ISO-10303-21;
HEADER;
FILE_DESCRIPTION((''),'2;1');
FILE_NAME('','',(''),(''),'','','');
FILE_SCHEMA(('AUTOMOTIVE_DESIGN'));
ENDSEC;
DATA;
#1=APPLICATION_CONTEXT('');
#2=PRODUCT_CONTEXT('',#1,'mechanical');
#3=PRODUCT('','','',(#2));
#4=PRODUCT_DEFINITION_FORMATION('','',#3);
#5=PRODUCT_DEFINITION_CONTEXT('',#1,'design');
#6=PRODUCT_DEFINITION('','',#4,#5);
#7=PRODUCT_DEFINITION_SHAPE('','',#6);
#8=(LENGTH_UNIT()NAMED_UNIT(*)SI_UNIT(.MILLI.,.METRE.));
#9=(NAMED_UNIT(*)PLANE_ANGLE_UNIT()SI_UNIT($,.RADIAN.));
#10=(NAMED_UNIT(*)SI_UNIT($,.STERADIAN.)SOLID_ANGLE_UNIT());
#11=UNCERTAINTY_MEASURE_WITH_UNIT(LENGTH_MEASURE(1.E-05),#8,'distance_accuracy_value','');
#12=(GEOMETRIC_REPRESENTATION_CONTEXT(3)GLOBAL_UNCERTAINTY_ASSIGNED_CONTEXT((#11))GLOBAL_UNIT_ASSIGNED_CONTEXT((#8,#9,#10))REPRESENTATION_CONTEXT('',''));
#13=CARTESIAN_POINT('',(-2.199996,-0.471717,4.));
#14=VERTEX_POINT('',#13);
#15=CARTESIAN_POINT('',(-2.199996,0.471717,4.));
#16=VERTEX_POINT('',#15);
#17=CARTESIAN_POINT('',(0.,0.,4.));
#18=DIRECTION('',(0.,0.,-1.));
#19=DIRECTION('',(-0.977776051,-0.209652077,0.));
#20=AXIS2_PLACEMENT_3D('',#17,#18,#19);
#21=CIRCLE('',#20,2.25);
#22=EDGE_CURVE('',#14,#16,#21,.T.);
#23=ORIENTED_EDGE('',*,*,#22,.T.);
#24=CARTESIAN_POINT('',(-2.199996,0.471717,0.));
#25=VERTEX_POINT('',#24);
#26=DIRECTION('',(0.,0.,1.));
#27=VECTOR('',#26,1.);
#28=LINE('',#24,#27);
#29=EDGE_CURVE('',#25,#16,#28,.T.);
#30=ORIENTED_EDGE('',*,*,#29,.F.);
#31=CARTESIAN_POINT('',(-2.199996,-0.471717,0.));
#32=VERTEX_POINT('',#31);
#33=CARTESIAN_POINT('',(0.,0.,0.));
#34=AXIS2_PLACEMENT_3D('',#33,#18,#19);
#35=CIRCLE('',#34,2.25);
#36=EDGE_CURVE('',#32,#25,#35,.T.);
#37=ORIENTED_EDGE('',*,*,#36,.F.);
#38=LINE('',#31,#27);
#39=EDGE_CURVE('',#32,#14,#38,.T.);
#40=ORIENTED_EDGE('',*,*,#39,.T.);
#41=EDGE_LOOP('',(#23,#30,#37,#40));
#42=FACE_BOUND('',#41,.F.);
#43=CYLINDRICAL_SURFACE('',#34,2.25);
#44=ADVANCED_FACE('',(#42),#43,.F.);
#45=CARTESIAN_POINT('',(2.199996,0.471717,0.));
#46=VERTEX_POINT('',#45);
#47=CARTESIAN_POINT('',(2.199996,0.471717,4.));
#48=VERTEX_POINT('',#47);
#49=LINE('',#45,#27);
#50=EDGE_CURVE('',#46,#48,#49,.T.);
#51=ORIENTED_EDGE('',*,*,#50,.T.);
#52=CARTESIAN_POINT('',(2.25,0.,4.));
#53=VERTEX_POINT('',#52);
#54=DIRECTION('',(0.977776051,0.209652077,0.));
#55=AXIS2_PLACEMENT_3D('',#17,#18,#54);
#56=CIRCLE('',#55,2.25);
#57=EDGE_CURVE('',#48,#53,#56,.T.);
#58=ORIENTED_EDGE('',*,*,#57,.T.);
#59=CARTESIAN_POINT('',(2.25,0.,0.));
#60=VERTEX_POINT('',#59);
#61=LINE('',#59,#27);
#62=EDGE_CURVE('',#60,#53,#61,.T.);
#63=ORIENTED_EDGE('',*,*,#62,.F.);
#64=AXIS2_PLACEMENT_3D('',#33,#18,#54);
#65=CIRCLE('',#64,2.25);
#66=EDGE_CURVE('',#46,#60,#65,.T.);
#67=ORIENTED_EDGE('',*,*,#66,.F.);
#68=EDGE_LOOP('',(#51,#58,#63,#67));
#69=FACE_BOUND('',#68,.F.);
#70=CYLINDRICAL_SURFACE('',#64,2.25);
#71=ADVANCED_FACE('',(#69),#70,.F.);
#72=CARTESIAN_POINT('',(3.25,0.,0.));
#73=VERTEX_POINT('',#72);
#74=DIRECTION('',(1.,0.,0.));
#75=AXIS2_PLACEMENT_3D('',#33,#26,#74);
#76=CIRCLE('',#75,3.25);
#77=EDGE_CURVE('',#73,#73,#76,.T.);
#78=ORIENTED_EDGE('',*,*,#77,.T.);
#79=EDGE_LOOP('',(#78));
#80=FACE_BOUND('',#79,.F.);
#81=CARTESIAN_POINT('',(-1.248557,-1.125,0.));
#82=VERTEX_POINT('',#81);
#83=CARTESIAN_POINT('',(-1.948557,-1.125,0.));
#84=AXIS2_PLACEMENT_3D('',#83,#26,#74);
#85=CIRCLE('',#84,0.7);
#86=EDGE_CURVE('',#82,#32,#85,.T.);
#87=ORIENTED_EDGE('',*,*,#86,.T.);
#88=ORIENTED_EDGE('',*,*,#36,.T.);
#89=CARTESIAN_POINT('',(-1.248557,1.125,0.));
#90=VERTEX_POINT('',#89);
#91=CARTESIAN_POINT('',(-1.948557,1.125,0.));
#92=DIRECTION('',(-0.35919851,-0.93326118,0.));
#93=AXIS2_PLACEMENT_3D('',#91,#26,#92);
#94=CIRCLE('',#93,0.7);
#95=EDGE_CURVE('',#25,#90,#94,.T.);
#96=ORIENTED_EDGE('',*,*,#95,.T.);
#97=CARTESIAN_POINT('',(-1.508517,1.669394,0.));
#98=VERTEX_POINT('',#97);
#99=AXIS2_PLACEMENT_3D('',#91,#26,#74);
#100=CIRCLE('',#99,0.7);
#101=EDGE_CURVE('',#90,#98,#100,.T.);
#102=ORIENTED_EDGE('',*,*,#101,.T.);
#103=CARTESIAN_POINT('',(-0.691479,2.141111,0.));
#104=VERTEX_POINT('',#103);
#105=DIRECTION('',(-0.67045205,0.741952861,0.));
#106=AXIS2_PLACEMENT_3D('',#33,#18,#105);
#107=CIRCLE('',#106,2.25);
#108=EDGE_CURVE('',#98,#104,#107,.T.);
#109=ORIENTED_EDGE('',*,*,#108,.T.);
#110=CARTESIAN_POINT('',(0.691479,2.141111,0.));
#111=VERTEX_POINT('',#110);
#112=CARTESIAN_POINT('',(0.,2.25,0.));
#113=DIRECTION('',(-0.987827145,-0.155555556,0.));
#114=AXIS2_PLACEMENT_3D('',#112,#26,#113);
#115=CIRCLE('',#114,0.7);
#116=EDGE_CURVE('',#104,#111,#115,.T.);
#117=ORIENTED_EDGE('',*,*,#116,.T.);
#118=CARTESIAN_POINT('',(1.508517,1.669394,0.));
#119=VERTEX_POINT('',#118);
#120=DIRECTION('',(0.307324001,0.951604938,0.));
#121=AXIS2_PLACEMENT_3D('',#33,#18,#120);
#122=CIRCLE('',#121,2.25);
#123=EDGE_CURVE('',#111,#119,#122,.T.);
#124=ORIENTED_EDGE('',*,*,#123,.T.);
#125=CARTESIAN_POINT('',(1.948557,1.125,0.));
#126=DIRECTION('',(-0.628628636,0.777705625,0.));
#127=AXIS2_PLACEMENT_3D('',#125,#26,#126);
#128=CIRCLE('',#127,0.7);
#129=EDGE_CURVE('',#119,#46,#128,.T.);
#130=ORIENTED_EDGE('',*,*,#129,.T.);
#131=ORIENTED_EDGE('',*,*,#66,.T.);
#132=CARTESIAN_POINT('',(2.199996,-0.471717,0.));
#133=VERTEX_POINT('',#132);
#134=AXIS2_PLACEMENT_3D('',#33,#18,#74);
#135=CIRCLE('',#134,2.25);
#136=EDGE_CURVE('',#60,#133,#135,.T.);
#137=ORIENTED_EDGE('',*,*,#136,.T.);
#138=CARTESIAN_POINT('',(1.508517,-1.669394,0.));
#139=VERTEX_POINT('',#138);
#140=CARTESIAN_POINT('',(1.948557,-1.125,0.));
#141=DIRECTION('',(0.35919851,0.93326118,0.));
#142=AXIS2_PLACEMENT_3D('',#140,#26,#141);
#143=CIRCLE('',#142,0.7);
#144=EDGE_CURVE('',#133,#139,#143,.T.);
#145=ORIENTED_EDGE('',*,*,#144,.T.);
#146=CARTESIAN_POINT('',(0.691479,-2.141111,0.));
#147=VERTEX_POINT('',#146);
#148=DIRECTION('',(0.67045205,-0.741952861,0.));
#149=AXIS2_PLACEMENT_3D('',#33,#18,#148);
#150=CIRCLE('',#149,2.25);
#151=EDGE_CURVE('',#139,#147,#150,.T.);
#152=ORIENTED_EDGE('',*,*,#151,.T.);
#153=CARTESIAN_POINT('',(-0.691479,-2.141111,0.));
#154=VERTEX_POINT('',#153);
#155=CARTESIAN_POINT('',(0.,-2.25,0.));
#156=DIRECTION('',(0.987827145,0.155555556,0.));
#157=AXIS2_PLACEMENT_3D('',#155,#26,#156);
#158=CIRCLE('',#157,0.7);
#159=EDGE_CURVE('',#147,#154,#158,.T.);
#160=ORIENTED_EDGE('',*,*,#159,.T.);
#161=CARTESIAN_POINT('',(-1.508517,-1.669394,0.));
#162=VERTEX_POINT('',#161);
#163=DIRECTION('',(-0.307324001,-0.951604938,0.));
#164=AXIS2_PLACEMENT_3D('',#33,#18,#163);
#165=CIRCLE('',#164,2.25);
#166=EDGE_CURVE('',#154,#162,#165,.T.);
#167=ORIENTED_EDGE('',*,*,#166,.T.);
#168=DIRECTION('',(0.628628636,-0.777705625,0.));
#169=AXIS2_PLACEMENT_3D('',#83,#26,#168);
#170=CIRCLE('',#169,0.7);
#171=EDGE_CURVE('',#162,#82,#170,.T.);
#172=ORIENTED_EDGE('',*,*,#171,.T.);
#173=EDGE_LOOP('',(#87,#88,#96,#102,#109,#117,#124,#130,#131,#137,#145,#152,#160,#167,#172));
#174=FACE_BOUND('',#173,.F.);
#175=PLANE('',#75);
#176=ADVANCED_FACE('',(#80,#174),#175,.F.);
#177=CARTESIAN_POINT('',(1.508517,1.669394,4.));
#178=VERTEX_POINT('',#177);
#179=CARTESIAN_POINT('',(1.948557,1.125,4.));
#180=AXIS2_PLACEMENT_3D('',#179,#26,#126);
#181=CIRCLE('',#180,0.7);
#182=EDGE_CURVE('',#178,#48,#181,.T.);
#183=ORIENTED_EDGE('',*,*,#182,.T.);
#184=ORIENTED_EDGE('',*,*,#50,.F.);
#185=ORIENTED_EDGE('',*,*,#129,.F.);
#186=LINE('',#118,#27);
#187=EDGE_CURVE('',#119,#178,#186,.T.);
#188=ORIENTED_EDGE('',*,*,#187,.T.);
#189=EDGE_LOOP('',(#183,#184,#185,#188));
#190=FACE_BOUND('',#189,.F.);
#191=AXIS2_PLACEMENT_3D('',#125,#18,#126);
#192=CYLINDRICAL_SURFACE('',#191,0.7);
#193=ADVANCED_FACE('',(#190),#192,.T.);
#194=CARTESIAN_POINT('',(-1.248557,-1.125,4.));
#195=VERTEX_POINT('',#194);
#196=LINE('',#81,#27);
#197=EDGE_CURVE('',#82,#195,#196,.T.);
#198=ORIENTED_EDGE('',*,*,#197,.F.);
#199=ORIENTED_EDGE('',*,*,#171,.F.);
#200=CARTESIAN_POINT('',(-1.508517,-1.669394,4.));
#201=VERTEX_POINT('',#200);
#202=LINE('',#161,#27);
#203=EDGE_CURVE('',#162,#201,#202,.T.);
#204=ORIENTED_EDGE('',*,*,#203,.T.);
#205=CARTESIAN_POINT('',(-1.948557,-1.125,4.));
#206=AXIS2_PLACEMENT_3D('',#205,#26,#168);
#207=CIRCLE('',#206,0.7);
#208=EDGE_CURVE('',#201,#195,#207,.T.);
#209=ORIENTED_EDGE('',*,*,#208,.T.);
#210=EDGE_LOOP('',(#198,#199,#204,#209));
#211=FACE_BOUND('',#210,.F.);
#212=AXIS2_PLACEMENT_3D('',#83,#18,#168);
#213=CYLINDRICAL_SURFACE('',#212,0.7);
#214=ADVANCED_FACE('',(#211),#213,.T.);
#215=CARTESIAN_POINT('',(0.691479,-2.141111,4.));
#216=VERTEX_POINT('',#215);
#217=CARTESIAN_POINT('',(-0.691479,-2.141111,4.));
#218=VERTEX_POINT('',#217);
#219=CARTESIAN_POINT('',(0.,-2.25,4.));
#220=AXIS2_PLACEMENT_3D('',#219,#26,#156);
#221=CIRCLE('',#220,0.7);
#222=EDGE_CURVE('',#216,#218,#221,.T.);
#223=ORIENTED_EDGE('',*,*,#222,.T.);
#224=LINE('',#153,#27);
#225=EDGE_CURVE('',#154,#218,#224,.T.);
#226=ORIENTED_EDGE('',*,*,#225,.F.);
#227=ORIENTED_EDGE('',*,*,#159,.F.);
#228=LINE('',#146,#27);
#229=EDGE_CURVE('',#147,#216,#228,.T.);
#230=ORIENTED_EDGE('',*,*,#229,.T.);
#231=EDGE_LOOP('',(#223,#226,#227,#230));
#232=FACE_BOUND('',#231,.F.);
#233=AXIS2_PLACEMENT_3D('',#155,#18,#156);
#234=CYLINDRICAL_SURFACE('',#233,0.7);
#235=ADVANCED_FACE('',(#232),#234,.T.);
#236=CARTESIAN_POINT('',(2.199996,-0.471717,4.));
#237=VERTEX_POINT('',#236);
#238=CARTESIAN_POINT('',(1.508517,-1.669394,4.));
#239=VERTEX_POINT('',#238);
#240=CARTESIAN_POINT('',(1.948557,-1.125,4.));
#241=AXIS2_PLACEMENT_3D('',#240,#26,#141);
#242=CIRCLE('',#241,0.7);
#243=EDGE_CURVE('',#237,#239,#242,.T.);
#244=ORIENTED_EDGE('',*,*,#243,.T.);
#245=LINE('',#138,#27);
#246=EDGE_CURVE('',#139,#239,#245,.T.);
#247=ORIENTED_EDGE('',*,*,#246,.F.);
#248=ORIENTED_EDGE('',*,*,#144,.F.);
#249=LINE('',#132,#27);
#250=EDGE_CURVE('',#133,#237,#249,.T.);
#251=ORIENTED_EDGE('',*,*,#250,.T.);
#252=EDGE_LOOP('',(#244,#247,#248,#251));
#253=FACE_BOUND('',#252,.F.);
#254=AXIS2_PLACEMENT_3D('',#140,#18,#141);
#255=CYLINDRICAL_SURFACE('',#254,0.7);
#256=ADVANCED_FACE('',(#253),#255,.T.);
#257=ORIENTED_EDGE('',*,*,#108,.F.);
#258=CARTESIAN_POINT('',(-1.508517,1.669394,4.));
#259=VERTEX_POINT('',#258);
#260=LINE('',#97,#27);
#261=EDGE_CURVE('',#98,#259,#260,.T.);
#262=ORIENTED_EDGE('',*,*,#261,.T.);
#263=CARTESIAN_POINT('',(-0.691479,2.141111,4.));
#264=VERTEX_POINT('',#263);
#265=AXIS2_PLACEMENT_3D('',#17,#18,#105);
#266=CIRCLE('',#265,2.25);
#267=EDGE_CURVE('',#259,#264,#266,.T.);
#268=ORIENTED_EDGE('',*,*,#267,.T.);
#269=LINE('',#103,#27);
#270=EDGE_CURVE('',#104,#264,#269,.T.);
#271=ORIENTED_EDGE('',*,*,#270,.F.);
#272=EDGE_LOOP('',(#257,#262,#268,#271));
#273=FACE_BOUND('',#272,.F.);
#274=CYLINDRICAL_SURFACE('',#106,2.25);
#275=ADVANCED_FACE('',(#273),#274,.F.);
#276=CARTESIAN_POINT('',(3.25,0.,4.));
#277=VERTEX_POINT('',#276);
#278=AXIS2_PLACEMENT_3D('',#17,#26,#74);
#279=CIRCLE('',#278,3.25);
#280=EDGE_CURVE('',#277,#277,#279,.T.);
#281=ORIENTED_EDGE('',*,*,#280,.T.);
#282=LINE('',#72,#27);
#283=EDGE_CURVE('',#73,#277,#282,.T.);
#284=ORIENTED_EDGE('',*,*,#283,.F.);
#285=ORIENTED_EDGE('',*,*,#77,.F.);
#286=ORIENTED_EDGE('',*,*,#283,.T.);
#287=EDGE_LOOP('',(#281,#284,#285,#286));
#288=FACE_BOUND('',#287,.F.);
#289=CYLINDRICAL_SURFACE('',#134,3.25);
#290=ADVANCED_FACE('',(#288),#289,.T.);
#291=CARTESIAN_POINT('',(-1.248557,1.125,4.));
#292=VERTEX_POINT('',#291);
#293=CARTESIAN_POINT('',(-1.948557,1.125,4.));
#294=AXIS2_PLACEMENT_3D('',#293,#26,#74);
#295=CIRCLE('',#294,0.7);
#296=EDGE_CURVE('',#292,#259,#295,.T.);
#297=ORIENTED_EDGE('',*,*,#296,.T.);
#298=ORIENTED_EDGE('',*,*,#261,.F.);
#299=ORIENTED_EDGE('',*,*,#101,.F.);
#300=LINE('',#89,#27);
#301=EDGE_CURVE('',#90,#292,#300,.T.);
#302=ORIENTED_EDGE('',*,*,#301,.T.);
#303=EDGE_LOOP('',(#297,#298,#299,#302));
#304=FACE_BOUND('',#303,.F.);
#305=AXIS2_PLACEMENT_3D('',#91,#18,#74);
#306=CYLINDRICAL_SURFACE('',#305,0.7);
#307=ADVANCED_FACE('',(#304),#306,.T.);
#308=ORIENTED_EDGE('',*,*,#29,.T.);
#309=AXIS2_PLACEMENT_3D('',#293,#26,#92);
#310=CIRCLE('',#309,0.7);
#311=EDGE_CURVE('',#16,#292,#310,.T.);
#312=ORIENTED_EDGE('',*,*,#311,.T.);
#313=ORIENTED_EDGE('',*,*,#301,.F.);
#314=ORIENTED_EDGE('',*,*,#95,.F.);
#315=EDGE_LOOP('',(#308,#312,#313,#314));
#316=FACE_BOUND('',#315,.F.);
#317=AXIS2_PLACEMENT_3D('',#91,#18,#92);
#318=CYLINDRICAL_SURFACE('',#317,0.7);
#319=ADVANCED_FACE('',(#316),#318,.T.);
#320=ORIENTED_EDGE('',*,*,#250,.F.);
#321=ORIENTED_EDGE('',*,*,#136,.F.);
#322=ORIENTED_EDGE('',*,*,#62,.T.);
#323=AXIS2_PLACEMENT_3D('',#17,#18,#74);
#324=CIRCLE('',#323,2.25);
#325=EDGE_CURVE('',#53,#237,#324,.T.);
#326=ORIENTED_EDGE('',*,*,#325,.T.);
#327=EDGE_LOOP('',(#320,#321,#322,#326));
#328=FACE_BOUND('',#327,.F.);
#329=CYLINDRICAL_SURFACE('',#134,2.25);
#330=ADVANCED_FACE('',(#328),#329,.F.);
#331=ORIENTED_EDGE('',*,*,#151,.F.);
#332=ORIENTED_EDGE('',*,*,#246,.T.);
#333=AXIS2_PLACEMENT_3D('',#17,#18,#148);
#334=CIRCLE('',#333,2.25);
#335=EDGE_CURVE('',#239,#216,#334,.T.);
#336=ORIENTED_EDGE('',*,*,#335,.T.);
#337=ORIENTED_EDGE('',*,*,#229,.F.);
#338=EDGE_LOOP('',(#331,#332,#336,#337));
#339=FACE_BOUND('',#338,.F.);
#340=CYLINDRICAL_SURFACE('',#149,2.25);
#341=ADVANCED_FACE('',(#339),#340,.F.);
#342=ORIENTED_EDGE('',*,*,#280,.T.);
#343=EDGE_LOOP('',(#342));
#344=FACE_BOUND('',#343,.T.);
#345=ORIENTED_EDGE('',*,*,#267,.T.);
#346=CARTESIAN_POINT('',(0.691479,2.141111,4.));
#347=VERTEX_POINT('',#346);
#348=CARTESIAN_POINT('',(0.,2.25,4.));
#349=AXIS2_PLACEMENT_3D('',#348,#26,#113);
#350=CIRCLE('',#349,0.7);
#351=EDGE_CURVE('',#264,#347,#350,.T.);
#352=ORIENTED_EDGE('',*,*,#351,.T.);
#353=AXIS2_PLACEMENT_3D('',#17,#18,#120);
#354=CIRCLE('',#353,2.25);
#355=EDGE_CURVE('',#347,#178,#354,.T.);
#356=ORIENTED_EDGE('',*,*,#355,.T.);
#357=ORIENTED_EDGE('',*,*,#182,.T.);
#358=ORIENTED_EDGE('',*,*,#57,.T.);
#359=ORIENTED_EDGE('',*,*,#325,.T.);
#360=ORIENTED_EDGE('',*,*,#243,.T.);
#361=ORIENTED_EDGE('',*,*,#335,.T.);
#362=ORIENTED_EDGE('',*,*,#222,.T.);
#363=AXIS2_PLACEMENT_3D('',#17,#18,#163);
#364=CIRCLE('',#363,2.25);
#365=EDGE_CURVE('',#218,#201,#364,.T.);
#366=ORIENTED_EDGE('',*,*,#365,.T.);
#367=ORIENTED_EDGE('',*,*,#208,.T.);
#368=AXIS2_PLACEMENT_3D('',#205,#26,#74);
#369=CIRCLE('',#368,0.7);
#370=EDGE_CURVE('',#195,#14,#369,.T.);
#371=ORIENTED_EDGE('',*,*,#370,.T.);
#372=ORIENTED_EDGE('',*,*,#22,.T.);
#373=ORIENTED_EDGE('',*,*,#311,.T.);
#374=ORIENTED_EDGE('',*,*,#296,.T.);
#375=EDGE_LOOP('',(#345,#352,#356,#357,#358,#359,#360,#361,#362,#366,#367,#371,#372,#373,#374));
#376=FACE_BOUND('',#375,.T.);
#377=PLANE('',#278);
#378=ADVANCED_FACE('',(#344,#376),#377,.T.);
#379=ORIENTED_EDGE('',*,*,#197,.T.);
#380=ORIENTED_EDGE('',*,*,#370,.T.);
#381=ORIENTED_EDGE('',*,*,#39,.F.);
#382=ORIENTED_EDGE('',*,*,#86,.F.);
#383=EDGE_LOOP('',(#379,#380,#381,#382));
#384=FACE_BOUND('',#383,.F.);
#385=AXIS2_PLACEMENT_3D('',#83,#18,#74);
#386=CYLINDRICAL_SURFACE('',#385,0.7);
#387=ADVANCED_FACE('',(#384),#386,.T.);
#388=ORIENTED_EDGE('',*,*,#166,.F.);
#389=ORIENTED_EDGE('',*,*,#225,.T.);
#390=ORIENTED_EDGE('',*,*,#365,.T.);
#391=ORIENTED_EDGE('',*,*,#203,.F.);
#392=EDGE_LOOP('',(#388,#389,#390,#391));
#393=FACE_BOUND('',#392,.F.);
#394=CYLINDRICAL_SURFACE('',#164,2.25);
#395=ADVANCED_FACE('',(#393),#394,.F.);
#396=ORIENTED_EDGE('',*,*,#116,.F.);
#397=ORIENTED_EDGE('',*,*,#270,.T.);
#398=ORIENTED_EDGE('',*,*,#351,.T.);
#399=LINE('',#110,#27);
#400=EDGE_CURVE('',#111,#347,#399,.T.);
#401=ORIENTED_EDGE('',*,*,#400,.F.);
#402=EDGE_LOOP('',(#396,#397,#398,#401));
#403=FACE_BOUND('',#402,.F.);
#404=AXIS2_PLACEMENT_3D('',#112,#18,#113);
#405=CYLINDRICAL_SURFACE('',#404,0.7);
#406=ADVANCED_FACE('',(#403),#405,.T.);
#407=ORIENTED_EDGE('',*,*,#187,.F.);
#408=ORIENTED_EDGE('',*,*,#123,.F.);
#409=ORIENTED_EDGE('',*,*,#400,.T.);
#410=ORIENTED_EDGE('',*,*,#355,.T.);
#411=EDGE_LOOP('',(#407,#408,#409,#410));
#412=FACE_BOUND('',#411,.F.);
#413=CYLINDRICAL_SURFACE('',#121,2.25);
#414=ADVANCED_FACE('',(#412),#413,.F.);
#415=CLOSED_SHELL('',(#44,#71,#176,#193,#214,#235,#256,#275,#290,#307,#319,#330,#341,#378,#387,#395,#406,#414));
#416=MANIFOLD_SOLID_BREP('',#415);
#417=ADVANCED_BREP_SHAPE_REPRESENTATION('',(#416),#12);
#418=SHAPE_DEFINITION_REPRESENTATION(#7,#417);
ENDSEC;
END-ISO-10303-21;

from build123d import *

# Parameters (mm, degrees)
F0_R     = 3.25
F1_DEPTH = 4


with BuildPart() as f1:
    # F0 (on Top) → F1 (new body)
    with BuildSketch(Plane.XY):
        Circle(F0_R)
        with BuildLine():
            ThreePointArc((2.1999961154, 0.4717171738), (2.2374641069, 0.2371800374), (2.25, 0))
            ThreePointArc((2.25, 0), (2.2374641069, -0.2371800374), (2.1999961154, -0.4717171738))
            ThreePointArc((2.1999961154, -0.4717171738), (2.5256218299, -0.7287723318), (2.6485571585, -1.125))
            ThreePointArc((2.6485571585, -1.125), (2.2501959894, -1.7566755621), (1.5085171137, -1.6693939373))
            ThreePointArc((1.5085171137, -1.6693939373), (1.125, -1.9485571585), (0.6914790018, -2.1411111111))
            ThreePointArc((0.6914790018, -2.1411111111), (0.6978664991, -2.1953891093), (0.7, -2.25))
            ThreePointArc((0.7, -2.25), (-0.0546108907, -2.9478664991), (-0.6914790018, -2.1411111111))
            ThreePointArc((-0.6914790018, -2.1411111111), (-1.125, -1.9485571585), (-1.5085171137, -1.6693939373))
            ThreePointArc((-1.5085171137, -1.6693939373), (-2.5547749412, -1.475), (-2.1999961154, -0.4717171738))
            ThreePointArc((-2.1999961154, -0.4717171738), (-2.25, 0), (-2.1999961154, 0.4717171738))
            ThreePointArc((-2.1999961154, 0.4717171738), (-2.5547749412, 1.475), (-1.5085171137, 1.6693939373))
            ThreePointArc((-1.5085171137, 1.6693939373), (-1.125, 1.9485571585), (-0.6914790018, 2.1411111111))
            ThreePointArc((-0.6914790018, 2.1411111111), (-0.0546108907, 2.9478664991), (0.7, 2.25))
            ThreePointArc((0.7, 2.25), (0.6978664991, 2.1953891093), (0.6914790018, 2.1411111111))
            ThreePointArc((0.6914790018, 2.1411111111), (1.125, 1.9485571585), (1.5085171137, 1.6693939373))
            ThreePointArc((1.5085171137, 1.6693939373), (2.2501959894, 1.7566755621), (2.6485571585, 1.125))
            ThreePointArc((2.6485571585, 1.125), (2.5256218299, 0.7287723318), (2.1999961154, 0.4717171738))
        make_face(mode=Mode.SUBTRACT)
        with BuildLine():
            ThreePointArc((1.5085171137, 1.6693939373), (1.9485571585, 1.125), (2.1999961154, 0.4717171738))
            ThreePointArc((2.1999961154, 0.4717171738), (2.5256218299, 0.7287723318), (2.6485571585, 1.125))
            ThreePointArc((2.6485571585, 1.125), (2.2501959894, 1.7566755621), (1.5085171137, 1.6693939373))
        make_face()
        with BuildLine():
            ThreePointArc((2.6485571585, -1.125), (2.5256218299, -0.7287723318), (2.1999961154, -0.4717171738))
            ThreePointArc((2.1999961154, -0.4717171738), (1.9485571585, -1.125), (1.5085171137, -1.6693939373))
            ThreePointArc((1.5085171137, -1.6693939373), (2.2501959894, -1.7566755621), (2.6485571585, -1.125))
        make_face()
        with BuildLine():
            ThreePointArc((-0.6914790018, 2.1411111111), (0, 2.25), (0.6914790018, 2.1411111111))
            ThreePointArc((0.6914790018, 2.1411111111), (0.6978664991, 2.1953891093), (0.7, 2.25))
            ThreePointArc((0.7, 2.25), (-0.0546108907, 2.9478664991), (-0.6914790018, 2.1411111111))
        make_face()
        with BuildLine():
            ThreePointArc((0.7, -2.25), (0.6978664991, -2.1953891093), (0.6914790018, -2.1411111111))
            ThreePointArc((0.6914790018, -2.1411111111), (0, -2.25), (-0.6914790018, -2.1411111111))
            ThreePointArc((-0.6914790018, -2.1411111111), (-0.0546108907, -2.9478664991), (0.7, -2.25))
        make_face()
        with BuildLine():
            ThreePointArc((-2.1999961154, 0.4717171738), (-1.9485571585, 1.125), (-1.5085171137, 1.6693939373))
            ThreePointArc((-1.5085171137, 1.6693939373), (-2.5547749412, 1.475), (-2.1999961154, 0.4717171738))
        make_face()
        with BuildLine():
            ThreePointArc((-2.1999961154, -0.4717171738), (-2.5547749412, -1.475), (-1.5085171137, -1.6693939373))
            ThreePointArc((-1.5085171137, -1.6693939373), (-1.9485571585, -1.125), (-2.1999961154, -0.4717171738))
        make_face()
        with BuildLine():
            ThreePointArc((1.5085171137, 1.6693939373), (1.3423393759, 0.775), (2.1999961154, 0.4717171738))
            ThreePointArc((2.1999961154, 0.4717171738), (1.9485571585, 1.125), (1.5085171137, 1.6693939373))
        make_face()
        with BuildLine():
            ThreePointArc((1.5085171137, -1.6693939373), (1.9485571585, -1.125), (2.1999961154, -0.4717171738))
            ThreePointArc((2.1999961154, -0.4717171738), (1.3423393759, -0.775), (1.5085171137, -1.6693939373))
        make_face()
        with BuildLine():
            ThreePointArc((-0.6914790018, 2.1411111111), (0, 1.55), (0.6914790018, 2.1411111111))
            ThreePointArc((0.6914790018, 2.1411111111), (0, 2.25), (-0.6914790018, 2.1411111111))
        make_face()
        with BuildLine():
            ThreePointArc((-0.6914790018, -2.1411111111), (0, -2.25), (0.6914790018, -2.1411111111))
            ThreePointArc((0.6914790018, -2.1411111111), (0, -1.55), (-0.6914790018, -2.1411111111))
        make_face()
        with BuildLine():
            ThreePointArc((-1.2485571585, 1.125), (-1.3168815965, 1.4266388309), (-1.5085171137, 1.6693939373))
            ThreePointArc((-1.5085171137, 1.6693939373), (-1.9485571585, 1.125), (-2.1999961154, 0.4717171738))
            ThreePointArc((-2.1999961154, 0.4717171738), (-1.5523294903, 0.5479353287), (-1.2485571585, 1.125))
        make_face()
        with BuildLine():
            ThreePointArc((-2.1999961154, -0.4717171738), (-1.9485571585, -1.125), (-1.5085171137, -1.6693939373))
            ThreePointArc((-1.5085171137, -1.6693939373), (-1.3168815965, -1.4266388309), (-1.2485571585, -1.125))
            ThreePointArc((-1.2485571585, -1.125), (-1.5523294903, -0.5479353287), (-2.1999961154, -0.4717171738))
        make_face()
    extrude(amount=F1_DEPTH)


solid = f1.part
